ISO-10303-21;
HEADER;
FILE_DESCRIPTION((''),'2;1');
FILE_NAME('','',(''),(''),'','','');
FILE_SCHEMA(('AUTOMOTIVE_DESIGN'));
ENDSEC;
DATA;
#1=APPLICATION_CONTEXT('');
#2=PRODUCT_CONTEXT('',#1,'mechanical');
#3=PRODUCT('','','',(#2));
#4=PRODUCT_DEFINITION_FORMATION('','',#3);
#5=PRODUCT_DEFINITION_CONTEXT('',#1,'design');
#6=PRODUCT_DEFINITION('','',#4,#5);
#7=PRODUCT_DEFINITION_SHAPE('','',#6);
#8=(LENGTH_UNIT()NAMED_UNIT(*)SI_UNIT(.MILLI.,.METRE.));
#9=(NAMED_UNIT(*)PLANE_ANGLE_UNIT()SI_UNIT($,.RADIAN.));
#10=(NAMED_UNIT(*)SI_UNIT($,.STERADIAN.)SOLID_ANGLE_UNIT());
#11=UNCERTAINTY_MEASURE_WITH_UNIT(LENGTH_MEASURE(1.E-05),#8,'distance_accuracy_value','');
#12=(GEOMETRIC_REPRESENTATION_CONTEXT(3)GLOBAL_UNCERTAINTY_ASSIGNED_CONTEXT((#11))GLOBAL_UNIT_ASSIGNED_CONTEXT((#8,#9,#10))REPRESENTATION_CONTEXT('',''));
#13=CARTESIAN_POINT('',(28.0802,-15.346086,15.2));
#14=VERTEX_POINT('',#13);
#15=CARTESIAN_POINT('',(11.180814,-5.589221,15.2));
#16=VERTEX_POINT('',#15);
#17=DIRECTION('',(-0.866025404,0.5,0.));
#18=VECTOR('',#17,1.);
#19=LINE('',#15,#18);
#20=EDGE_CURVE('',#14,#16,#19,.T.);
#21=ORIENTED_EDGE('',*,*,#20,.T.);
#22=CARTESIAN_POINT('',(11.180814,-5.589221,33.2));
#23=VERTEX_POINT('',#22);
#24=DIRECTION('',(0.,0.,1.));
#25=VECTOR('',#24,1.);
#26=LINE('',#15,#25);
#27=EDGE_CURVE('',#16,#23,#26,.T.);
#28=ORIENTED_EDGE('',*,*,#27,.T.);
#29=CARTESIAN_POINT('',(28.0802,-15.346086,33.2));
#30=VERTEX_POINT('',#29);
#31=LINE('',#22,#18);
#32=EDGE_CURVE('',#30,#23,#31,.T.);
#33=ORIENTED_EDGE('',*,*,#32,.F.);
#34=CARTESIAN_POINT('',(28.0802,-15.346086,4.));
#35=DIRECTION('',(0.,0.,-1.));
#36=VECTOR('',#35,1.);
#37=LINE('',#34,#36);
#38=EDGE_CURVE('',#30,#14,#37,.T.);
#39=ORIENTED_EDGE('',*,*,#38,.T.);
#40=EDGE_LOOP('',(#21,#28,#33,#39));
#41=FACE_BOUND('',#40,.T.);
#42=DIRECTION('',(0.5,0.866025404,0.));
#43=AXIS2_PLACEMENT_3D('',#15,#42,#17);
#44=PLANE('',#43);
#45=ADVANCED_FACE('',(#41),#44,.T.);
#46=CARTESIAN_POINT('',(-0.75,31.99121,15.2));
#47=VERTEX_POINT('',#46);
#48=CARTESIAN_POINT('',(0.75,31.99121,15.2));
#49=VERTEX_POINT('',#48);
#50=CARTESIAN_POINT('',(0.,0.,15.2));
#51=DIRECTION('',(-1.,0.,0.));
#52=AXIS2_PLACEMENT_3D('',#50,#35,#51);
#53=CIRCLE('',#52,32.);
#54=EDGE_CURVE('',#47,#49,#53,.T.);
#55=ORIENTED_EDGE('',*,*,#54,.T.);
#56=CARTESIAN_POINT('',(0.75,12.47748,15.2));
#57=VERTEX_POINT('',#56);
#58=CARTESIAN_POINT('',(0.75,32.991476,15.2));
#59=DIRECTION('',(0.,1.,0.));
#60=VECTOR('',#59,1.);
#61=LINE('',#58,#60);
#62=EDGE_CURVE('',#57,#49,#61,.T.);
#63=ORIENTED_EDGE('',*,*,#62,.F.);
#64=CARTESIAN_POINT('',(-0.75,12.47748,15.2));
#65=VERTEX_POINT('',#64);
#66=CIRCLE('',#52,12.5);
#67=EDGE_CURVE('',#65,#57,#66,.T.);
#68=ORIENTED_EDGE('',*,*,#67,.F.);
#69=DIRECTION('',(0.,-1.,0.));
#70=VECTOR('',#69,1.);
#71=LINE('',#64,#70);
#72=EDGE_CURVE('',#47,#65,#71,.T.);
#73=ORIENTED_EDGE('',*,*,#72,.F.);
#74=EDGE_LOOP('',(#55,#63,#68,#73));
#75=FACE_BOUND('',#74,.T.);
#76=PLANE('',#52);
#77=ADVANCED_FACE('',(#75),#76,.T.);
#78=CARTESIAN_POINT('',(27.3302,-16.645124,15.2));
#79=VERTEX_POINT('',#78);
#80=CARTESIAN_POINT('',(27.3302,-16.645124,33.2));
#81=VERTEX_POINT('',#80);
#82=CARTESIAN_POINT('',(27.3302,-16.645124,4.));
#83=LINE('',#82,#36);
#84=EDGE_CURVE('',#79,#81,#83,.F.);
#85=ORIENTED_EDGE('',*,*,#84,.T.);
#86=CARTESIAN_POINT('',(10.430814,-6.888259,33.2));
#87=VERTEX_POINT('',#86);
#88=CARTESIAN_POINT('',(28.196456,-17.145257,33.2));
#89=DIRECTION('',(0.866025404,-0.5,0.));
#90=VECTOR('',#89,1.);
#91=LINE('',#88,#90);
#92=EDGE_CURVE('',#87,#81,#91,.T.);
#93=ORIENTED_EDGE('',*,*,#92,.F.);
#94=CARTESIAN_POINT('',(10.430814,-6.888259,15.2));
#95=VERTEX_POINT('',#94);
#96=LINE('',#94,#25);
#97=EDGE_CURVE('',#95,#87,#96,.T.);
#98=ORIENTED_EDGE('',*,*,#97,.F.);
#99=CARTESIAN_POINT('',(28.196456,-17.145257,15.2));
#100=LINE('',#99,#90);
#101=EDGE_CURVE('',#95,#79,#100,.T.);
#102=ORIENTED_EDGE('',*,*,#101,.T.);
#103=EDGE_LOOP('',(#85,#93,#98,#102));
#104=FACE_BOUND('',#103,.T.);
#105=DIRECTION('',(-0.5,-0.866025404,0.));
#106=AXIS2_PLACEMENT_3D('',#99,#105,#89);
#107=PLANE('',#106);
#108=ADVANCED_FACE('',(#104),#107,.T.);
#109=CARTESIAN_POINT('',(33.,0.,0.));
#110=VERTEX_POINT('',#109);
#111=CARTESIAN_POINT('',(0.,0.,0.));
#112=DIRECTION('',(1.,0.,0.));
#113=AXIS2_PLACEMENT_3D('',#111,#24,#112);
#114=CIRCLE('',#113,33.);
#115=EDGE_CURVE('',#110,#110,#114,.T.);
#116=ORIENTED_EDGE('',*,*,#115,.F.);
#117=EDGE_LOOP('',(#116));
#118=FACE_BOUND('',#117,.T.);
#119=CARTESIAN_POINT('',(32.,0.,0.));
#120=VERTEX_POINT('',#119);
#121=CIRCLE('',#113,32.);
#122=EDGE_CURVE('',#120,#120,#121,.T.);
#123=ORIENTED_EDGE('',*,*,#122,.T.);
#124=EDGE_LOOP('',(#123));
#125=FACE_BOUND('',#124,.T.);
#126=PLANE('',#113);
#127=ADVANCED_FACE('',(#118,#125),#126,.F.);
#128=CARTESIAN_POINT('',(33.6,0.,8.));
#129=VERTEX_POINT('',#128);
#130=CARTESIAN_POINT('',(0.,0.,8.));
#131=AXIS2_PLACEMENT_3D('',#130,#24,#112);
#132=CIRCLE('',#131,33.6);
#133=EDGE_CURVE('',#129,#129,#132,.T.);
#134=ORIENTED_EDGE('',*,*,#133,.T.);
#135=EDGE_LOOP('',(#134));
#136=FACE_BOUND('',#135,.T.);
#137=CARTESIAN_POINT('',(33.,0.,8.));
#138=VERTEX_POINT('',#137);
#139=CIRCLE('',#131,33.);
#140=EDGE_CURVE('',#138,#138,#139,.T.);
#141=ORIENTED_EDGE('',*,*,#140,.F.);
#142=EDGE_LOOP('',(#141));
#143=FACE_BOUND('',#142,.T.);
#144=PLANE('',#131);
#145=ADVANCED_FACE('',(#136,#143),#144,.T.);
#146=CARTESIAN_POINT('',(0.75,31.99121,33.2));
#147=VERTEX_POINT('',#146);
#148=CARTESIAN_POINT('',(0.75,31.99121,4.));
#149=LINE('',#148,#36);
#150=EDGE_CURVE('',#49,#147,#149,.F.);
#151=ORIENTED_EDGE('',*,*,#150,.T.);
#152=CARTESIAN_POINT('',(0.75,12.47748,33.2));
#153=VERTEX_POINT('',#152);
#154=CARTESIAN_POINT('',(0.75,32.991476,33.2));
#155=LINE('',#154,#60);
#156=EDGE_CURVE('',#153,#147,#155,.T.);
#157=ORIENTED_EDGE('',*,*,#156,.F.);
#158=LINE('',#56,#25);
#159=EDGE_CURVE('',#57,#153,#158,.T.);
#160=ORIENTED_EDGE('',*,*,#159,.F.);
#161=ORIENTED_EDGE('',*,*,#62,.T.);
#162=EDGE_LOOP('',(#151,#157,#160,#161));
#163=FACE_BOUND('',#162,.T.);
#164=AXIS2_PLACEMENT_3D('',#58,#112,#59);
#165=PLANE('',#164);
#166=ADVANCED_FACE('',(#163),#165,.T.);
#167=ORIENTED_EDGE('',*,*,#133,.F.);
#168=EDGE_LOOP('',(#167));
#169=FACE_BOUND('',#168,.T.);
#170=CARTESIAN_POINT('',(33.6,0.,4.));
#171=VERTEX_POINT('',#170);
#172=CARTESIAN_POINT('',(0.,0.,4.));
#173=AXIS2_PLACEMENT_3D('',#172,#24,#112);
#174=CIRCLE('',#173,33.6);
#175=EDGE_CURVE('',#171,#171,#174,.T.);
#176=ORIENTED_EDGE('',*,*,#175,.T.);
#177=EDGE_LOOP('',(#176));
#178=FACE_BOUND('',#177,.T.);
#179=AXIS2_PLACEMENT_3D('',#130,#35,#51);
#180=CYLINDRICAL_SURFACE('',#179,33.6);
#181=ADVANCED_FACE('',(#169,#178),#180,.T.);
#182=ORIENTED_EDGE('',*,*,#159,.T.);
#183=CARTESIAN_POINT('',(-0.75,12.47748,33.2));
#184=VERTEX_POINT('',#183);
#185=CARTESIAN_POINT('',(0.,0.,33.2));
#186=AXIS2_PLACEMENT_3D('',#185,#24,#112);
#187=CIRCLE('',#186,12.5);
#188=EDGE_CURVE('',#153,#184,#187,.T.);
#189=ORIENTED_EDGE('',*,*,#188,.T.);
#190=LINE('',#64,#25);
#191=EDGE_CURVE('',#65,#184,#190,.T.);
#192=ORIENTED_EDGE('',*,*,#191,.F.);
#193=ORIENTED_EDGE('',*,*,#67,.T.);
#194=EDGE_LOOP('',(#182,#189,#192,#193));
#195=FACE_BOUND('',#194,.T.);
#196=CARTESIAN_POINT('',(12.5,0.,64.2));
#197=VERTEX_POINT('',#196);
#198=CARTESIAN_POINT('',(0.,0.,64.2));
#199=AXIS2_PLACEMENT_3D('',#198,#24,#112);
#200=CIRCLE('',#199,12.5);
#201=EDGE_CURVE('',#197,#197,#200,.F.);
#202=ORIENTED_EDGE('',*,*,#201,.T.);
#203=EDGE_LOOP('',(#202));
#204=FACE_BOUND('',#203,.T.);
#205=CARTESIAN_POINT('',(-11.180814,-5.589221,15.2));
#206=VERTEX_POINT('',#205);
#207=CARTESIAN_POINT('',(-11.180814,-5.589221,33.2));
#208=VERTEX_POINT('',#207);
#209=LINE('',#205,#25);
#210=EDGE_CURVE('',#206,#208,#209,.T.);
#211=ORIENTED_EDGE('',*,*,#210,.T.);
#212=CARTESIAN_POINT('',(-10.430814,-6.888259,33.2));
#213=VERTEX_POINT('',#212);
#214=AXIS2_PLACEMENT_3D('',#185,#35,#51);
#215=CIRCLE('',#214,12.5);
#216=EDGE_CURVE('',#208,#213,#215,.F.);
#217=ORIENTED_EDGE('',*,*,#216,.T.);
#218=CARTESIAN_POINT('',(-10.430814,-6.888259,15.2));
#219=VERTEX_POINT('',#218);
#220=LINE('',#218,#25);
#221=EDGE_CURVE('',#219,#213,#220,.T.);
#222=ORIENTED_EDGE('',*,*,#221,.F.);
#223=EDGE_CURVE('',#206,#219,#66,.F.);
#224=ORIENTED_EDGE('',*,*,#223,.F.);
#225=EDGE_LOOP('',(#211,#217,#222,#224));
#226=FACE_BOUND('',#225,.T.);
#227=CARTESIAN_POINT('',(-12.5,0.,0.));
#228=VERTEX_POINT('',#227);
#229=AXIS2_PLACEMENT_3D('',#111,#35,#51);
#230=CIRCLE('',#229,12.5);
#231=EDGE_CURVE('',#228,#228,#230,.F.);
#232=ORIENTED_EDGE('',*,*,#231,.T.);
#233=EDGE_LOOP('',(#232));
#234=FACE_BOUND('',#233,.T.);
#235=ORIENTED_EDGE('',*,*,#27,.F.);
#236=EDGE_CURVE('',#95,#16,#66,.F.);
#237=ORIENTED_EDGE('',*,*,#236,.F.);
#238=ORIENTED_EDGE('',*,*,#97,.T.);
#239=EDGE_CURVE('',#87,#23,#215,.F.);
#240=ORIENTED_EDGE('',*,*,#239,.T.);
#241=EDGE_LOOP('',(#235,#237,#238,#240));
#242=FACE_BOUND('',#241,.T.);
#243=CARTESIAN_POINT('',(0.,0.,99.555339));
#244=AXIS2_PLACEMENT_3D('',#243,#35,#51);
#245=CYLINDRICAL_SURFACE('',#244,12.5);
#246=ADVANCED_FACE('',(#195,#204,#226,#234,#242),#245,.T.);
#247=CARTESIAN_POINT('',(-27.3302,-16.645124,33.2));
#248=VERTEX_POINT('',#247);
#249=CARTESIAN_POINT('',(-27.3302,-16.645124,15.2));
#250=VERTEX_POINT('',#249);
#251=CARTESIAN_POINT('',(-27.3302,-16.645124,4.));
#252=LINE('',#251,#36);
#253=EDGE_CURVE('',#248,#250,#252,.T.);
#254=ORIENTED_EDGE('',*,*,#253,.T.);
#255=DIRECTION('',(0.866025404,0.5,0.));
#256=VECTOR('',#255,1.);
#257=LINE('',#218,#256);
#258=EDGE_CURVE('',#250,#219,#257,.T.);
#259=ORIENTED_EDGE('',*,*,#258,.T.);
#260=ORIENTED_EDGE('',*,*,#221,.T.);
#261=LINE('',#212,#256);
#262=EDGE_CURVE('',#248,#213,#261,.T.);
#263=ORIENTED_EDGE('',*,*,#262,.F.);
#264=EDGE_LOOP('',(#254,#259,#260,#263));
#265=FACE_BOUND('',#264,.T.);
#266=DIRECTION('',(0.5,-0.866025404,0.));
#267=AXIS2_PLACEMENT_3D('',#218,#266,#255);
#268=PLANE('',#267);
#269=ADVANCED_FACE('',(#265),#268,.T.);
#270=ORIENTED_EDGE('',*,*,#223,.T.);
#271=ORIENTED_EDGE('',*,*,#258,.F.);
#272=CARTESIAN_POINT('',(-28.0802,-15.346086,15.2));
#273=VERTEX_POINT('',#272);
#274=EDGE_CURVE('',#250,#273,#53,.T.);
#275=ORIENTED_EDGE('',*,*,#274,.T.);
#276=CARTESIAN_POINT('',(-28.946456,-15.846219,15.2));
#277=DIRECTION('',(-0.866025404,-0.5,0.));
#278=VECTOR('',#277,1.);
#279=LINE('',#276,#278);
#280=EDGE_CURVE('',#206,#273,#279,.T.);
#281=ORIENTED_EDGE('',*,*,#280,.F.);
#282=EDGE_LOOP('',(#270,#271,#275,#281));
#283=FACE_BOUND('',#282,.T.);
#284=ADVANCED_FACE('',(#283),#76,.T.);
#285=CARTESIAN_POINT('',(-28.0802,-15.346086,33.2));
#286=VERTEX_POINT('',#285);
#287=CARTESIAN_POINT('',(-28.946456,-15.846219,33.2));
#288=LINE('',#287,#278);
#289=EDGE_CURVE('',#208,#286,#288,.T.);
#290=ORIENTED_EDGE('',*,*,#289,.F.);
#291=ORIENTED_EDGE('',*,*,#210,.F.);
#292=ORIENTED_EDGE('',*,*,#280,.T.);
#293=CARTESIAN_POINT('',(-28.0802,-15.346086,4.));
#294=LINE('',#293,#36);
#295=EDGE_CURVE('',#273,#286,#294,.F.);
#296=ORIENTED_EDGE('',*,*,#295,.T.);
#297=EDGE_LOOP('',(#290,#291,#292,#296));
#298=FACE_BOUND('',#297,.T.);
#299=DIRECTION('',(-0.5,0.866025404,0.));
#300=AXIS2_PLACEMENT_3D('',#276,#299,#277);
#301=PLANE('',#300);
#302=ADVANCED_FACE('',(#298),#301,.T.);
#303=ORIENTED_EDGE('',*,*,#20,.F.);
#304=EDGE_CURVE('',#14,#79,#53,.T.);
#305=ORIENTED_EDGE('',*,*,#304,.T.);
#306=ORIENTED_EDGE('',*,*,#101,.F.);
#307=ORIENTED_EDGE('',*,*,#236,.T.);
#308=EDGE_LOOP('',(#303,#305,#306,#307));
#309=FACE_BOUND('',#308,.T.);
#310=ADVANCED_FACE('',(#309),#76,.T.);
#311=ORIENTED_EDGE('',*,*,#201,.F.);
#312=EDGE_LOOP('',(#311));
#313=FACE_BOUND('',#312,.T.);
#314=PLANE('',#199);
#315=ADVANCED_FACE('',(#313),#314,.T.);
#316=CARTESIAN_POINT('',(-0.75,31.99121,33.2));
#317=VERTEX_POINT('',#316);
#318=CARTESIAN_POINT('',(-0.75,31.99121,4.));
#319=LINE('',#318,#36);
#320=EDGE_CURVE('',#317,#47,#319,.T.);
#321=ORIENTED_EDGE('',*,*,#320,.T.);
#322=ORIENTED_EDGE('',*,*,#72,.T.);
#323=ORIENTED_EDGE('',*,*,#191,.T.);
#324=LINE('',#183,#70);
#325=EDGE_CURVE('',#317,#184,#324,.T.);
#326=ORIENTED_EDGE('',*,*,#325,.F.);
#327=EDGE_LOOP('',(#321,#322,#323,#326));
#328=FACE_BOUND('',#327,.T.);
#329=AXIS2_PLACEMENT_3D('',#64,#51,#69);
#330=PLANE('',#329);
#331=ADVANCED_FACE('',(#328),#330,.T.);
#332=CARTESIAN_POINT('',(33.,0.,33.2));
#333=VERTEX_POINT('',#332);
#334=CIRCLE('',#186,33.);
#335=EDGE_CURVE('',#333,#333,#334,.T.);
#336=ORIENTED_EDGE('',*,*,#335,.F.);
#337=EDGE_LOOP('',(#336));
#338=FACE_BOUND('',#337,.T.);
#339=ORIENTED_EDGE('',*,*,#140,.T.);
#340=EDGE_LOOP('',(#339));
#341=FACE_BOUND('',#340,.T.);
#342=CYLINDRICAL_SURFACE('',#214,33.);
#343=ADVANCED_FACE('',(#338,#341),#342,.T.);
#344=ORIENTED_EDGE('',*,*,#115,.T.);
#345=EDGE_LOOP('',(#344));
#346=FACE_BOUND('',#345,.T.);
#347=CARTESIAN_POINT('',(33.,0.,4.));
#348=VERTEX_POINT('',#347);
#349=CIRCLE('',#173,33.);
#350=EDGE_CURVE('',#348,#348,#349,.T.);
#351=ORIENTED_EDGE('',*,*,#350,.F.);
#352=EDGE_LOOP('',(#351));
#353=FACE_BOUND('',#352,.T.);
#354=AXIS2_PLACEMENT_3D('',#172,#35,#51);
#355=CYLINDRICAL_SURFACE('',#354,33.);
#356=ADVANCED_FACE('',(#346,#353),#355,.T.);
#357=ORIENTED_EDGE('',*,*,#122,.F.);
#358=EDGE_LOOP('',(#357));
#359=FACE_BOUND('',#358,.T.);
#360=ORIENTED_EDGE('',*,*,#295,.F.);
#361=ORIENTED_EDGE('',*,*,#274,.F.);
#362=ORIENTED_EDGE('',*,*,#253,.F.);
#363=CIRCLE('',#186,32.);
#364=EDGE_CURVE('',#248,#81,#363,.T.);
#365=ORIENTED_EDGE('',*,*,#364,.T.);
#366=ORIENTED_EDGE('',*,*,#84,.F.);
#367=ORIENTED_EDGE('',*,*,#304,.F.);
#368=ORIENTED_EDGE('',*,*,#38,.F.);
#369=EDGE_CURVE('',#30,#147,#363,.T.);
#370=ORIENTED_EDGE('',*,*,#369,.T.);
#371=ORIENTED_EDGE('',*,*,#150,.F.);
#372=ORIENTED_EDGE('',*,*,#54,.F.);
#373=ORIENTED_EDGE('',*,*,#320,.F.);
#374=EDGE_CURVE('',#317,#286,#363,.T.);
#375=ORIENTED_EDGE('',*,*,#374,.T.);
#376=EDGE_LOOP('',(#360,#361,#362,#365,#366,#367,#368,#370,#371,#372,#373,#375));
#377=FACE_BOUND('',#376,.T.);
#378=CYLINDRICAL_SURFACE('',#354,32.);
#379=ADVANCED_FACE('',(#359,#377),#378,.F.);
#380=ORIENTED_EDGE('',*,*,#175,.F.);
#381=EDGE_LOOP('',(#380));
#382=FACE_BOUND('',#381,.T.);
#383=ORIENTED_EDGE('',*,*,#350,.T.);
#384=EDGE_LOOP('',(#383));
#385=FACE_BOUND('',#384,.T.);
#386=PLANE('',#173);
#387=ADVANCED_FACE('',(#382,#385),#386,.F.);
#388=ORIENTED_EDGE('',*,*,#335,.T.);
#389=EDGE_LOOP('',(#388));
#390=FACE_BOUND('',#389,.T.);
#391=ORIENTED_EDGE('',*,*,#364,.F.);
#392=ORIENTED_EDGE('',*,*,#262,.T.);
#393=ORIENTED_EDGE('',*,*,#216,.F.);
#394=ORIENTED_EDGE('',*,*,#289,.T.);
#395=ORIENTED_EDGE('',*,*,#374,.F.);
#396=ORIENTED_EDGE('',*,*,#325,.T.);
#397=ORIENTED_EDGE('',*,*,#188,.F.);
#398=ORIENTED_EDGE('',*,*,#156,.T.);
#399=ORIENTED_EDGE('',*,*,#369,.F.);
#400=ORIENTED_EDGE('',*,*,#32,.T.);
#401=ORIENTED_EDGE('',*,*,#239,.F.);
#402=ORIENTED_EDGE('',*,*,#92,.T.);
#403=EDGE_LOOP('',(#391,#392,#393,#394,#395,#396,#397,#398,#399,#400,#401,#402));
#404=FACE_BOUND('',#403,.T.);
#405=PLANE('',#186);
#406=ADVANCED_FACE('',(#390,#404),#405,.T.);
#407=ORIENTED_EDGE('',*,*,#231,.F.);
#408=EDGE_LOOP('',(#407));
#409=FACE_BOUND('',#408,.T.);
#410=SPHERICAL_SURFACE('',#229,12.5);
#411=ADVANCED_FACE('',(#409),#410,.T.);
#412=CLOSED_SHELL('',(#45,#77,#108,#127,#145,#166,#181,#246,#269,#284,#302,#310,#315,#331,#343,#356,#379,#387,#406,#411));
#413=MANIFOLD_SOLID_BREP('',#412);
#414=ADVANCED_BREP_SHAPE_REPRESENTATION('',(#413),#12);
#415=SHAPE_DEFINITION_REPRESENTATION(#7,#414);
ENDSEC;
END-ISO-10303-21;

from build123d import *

# Parameters (mm, degrees)
ESQUISSE1_R             = 33
ESQUISSE1_R_2           = 32
BOSS_EXTRU_1_DEPTH      = 4
ESQUISSE2_R             = 33.6
ESQUISSE2_R_2           = 32
BOSS_EXTRU_2_DEPTH      = 4
ESQUISSE3_R             = 33
ESQUISSE3_R_2           = 32
BOSS_EXTRU_3_DEPTH      = 25.2
BOSS_EXTRU_4_DEPTH      = 12.5
BOSS_EXTRU_4_DEPTH_BACK = 64.2
ESQUISSE4_R             = 12.5
CONG_1_R                = 12.5
ESQUISSE5_W             = 1.5
ESQUISSE5_H             = 20.513996459
BOSS_EXTRU_5_DEPTH      = 18


with BuildPart() as part:
    # Esquisse1 → Boss.-Extru.1 (new body)
    with BuildSketch(Plane.XY):
        Circle(ESQUISSE1_R)
        Circle(ESQUISSE1_R_2, mode=Mode.SUBTRACT)
    extrude(amount=BOSS_EXTRU_1_DEPTH)

    # Esquisse2 → Boss.-Extru.2 (add)
    with BuildSketch(Plane.XY.offset(4)):
        Circle(ESQUISSE2_R)
        Circle(ESQUISSE2_R_2, mode=Mode.SUBTRACT)
    extrude(amount=BOSS_EXTRU_2_DEPTH)

    # Esquisse3 → Boss.-Extru.3 (add)
    with BuildSketch(Plane.XY.offset(8)):
        Circle(ESQUISSE3_R)
        Circle(ESQUISSE3_R_2, mode=Mode.SUBTRACT)
    extrude(amount=BOSS_EXTRU_3_DEPTH)



with BuildPart() as body_2:
    # Esquisse4 → Boss.-Extru.4 (new, two sides: drawn at the far end of the back side and taken through both)
    with BuildSketch(Plane(origin=(0, 0, 0), x_dir=(-1, 0, 0), z_dir=(0, 0, -1)).offset(-BOSS_EXTRU_4_DEPTH_BACK)):
        Circle(ESQUISSE4_R)
    extrude(amount=BOSS_EXTRU_4_DEPTH + BOSS_EXTRU_4_DEPTH_BACK)

    # Congé1
    cong_1_edges = [body_2.edges().sort_by_distance(p)[0] for p in [
        (12.5, 0, -12.5),
    ]]
    fillet(cong_1_edges, radius=CONG_1_R - 0.0001)  # a hair under: the kernel refuses the full size


with BuildPart() as part_1:
    add(part.part)

    add(body_2.part)  # Boss.-Extru.5 merges body 2
    # Esquisse5 → Boss.-Extru.5 (add)
    with BuildSketch(Plane.XY.offset(33.2)):
        with Locations((0, 22.734477942)):
            Rectangle(ESQUISSE5_W, ESQUISSE5_H)
        Polygon((28.196456473, -17.145257139), (10.430814407, -6.88825891), (11.180814407, -5.589220804), (28.946456473, -15.846219033), align=None)
        Polygon((-28.946456473, -15.846219033), (-11.180814407, -5.589220804), (-10.430814407, -6.88825891), (-28.196456473, -17.145257139), align=None)
    extrude(amount=-BOSS_EXTRU_5_DEPTH)


solid = part_1.part
